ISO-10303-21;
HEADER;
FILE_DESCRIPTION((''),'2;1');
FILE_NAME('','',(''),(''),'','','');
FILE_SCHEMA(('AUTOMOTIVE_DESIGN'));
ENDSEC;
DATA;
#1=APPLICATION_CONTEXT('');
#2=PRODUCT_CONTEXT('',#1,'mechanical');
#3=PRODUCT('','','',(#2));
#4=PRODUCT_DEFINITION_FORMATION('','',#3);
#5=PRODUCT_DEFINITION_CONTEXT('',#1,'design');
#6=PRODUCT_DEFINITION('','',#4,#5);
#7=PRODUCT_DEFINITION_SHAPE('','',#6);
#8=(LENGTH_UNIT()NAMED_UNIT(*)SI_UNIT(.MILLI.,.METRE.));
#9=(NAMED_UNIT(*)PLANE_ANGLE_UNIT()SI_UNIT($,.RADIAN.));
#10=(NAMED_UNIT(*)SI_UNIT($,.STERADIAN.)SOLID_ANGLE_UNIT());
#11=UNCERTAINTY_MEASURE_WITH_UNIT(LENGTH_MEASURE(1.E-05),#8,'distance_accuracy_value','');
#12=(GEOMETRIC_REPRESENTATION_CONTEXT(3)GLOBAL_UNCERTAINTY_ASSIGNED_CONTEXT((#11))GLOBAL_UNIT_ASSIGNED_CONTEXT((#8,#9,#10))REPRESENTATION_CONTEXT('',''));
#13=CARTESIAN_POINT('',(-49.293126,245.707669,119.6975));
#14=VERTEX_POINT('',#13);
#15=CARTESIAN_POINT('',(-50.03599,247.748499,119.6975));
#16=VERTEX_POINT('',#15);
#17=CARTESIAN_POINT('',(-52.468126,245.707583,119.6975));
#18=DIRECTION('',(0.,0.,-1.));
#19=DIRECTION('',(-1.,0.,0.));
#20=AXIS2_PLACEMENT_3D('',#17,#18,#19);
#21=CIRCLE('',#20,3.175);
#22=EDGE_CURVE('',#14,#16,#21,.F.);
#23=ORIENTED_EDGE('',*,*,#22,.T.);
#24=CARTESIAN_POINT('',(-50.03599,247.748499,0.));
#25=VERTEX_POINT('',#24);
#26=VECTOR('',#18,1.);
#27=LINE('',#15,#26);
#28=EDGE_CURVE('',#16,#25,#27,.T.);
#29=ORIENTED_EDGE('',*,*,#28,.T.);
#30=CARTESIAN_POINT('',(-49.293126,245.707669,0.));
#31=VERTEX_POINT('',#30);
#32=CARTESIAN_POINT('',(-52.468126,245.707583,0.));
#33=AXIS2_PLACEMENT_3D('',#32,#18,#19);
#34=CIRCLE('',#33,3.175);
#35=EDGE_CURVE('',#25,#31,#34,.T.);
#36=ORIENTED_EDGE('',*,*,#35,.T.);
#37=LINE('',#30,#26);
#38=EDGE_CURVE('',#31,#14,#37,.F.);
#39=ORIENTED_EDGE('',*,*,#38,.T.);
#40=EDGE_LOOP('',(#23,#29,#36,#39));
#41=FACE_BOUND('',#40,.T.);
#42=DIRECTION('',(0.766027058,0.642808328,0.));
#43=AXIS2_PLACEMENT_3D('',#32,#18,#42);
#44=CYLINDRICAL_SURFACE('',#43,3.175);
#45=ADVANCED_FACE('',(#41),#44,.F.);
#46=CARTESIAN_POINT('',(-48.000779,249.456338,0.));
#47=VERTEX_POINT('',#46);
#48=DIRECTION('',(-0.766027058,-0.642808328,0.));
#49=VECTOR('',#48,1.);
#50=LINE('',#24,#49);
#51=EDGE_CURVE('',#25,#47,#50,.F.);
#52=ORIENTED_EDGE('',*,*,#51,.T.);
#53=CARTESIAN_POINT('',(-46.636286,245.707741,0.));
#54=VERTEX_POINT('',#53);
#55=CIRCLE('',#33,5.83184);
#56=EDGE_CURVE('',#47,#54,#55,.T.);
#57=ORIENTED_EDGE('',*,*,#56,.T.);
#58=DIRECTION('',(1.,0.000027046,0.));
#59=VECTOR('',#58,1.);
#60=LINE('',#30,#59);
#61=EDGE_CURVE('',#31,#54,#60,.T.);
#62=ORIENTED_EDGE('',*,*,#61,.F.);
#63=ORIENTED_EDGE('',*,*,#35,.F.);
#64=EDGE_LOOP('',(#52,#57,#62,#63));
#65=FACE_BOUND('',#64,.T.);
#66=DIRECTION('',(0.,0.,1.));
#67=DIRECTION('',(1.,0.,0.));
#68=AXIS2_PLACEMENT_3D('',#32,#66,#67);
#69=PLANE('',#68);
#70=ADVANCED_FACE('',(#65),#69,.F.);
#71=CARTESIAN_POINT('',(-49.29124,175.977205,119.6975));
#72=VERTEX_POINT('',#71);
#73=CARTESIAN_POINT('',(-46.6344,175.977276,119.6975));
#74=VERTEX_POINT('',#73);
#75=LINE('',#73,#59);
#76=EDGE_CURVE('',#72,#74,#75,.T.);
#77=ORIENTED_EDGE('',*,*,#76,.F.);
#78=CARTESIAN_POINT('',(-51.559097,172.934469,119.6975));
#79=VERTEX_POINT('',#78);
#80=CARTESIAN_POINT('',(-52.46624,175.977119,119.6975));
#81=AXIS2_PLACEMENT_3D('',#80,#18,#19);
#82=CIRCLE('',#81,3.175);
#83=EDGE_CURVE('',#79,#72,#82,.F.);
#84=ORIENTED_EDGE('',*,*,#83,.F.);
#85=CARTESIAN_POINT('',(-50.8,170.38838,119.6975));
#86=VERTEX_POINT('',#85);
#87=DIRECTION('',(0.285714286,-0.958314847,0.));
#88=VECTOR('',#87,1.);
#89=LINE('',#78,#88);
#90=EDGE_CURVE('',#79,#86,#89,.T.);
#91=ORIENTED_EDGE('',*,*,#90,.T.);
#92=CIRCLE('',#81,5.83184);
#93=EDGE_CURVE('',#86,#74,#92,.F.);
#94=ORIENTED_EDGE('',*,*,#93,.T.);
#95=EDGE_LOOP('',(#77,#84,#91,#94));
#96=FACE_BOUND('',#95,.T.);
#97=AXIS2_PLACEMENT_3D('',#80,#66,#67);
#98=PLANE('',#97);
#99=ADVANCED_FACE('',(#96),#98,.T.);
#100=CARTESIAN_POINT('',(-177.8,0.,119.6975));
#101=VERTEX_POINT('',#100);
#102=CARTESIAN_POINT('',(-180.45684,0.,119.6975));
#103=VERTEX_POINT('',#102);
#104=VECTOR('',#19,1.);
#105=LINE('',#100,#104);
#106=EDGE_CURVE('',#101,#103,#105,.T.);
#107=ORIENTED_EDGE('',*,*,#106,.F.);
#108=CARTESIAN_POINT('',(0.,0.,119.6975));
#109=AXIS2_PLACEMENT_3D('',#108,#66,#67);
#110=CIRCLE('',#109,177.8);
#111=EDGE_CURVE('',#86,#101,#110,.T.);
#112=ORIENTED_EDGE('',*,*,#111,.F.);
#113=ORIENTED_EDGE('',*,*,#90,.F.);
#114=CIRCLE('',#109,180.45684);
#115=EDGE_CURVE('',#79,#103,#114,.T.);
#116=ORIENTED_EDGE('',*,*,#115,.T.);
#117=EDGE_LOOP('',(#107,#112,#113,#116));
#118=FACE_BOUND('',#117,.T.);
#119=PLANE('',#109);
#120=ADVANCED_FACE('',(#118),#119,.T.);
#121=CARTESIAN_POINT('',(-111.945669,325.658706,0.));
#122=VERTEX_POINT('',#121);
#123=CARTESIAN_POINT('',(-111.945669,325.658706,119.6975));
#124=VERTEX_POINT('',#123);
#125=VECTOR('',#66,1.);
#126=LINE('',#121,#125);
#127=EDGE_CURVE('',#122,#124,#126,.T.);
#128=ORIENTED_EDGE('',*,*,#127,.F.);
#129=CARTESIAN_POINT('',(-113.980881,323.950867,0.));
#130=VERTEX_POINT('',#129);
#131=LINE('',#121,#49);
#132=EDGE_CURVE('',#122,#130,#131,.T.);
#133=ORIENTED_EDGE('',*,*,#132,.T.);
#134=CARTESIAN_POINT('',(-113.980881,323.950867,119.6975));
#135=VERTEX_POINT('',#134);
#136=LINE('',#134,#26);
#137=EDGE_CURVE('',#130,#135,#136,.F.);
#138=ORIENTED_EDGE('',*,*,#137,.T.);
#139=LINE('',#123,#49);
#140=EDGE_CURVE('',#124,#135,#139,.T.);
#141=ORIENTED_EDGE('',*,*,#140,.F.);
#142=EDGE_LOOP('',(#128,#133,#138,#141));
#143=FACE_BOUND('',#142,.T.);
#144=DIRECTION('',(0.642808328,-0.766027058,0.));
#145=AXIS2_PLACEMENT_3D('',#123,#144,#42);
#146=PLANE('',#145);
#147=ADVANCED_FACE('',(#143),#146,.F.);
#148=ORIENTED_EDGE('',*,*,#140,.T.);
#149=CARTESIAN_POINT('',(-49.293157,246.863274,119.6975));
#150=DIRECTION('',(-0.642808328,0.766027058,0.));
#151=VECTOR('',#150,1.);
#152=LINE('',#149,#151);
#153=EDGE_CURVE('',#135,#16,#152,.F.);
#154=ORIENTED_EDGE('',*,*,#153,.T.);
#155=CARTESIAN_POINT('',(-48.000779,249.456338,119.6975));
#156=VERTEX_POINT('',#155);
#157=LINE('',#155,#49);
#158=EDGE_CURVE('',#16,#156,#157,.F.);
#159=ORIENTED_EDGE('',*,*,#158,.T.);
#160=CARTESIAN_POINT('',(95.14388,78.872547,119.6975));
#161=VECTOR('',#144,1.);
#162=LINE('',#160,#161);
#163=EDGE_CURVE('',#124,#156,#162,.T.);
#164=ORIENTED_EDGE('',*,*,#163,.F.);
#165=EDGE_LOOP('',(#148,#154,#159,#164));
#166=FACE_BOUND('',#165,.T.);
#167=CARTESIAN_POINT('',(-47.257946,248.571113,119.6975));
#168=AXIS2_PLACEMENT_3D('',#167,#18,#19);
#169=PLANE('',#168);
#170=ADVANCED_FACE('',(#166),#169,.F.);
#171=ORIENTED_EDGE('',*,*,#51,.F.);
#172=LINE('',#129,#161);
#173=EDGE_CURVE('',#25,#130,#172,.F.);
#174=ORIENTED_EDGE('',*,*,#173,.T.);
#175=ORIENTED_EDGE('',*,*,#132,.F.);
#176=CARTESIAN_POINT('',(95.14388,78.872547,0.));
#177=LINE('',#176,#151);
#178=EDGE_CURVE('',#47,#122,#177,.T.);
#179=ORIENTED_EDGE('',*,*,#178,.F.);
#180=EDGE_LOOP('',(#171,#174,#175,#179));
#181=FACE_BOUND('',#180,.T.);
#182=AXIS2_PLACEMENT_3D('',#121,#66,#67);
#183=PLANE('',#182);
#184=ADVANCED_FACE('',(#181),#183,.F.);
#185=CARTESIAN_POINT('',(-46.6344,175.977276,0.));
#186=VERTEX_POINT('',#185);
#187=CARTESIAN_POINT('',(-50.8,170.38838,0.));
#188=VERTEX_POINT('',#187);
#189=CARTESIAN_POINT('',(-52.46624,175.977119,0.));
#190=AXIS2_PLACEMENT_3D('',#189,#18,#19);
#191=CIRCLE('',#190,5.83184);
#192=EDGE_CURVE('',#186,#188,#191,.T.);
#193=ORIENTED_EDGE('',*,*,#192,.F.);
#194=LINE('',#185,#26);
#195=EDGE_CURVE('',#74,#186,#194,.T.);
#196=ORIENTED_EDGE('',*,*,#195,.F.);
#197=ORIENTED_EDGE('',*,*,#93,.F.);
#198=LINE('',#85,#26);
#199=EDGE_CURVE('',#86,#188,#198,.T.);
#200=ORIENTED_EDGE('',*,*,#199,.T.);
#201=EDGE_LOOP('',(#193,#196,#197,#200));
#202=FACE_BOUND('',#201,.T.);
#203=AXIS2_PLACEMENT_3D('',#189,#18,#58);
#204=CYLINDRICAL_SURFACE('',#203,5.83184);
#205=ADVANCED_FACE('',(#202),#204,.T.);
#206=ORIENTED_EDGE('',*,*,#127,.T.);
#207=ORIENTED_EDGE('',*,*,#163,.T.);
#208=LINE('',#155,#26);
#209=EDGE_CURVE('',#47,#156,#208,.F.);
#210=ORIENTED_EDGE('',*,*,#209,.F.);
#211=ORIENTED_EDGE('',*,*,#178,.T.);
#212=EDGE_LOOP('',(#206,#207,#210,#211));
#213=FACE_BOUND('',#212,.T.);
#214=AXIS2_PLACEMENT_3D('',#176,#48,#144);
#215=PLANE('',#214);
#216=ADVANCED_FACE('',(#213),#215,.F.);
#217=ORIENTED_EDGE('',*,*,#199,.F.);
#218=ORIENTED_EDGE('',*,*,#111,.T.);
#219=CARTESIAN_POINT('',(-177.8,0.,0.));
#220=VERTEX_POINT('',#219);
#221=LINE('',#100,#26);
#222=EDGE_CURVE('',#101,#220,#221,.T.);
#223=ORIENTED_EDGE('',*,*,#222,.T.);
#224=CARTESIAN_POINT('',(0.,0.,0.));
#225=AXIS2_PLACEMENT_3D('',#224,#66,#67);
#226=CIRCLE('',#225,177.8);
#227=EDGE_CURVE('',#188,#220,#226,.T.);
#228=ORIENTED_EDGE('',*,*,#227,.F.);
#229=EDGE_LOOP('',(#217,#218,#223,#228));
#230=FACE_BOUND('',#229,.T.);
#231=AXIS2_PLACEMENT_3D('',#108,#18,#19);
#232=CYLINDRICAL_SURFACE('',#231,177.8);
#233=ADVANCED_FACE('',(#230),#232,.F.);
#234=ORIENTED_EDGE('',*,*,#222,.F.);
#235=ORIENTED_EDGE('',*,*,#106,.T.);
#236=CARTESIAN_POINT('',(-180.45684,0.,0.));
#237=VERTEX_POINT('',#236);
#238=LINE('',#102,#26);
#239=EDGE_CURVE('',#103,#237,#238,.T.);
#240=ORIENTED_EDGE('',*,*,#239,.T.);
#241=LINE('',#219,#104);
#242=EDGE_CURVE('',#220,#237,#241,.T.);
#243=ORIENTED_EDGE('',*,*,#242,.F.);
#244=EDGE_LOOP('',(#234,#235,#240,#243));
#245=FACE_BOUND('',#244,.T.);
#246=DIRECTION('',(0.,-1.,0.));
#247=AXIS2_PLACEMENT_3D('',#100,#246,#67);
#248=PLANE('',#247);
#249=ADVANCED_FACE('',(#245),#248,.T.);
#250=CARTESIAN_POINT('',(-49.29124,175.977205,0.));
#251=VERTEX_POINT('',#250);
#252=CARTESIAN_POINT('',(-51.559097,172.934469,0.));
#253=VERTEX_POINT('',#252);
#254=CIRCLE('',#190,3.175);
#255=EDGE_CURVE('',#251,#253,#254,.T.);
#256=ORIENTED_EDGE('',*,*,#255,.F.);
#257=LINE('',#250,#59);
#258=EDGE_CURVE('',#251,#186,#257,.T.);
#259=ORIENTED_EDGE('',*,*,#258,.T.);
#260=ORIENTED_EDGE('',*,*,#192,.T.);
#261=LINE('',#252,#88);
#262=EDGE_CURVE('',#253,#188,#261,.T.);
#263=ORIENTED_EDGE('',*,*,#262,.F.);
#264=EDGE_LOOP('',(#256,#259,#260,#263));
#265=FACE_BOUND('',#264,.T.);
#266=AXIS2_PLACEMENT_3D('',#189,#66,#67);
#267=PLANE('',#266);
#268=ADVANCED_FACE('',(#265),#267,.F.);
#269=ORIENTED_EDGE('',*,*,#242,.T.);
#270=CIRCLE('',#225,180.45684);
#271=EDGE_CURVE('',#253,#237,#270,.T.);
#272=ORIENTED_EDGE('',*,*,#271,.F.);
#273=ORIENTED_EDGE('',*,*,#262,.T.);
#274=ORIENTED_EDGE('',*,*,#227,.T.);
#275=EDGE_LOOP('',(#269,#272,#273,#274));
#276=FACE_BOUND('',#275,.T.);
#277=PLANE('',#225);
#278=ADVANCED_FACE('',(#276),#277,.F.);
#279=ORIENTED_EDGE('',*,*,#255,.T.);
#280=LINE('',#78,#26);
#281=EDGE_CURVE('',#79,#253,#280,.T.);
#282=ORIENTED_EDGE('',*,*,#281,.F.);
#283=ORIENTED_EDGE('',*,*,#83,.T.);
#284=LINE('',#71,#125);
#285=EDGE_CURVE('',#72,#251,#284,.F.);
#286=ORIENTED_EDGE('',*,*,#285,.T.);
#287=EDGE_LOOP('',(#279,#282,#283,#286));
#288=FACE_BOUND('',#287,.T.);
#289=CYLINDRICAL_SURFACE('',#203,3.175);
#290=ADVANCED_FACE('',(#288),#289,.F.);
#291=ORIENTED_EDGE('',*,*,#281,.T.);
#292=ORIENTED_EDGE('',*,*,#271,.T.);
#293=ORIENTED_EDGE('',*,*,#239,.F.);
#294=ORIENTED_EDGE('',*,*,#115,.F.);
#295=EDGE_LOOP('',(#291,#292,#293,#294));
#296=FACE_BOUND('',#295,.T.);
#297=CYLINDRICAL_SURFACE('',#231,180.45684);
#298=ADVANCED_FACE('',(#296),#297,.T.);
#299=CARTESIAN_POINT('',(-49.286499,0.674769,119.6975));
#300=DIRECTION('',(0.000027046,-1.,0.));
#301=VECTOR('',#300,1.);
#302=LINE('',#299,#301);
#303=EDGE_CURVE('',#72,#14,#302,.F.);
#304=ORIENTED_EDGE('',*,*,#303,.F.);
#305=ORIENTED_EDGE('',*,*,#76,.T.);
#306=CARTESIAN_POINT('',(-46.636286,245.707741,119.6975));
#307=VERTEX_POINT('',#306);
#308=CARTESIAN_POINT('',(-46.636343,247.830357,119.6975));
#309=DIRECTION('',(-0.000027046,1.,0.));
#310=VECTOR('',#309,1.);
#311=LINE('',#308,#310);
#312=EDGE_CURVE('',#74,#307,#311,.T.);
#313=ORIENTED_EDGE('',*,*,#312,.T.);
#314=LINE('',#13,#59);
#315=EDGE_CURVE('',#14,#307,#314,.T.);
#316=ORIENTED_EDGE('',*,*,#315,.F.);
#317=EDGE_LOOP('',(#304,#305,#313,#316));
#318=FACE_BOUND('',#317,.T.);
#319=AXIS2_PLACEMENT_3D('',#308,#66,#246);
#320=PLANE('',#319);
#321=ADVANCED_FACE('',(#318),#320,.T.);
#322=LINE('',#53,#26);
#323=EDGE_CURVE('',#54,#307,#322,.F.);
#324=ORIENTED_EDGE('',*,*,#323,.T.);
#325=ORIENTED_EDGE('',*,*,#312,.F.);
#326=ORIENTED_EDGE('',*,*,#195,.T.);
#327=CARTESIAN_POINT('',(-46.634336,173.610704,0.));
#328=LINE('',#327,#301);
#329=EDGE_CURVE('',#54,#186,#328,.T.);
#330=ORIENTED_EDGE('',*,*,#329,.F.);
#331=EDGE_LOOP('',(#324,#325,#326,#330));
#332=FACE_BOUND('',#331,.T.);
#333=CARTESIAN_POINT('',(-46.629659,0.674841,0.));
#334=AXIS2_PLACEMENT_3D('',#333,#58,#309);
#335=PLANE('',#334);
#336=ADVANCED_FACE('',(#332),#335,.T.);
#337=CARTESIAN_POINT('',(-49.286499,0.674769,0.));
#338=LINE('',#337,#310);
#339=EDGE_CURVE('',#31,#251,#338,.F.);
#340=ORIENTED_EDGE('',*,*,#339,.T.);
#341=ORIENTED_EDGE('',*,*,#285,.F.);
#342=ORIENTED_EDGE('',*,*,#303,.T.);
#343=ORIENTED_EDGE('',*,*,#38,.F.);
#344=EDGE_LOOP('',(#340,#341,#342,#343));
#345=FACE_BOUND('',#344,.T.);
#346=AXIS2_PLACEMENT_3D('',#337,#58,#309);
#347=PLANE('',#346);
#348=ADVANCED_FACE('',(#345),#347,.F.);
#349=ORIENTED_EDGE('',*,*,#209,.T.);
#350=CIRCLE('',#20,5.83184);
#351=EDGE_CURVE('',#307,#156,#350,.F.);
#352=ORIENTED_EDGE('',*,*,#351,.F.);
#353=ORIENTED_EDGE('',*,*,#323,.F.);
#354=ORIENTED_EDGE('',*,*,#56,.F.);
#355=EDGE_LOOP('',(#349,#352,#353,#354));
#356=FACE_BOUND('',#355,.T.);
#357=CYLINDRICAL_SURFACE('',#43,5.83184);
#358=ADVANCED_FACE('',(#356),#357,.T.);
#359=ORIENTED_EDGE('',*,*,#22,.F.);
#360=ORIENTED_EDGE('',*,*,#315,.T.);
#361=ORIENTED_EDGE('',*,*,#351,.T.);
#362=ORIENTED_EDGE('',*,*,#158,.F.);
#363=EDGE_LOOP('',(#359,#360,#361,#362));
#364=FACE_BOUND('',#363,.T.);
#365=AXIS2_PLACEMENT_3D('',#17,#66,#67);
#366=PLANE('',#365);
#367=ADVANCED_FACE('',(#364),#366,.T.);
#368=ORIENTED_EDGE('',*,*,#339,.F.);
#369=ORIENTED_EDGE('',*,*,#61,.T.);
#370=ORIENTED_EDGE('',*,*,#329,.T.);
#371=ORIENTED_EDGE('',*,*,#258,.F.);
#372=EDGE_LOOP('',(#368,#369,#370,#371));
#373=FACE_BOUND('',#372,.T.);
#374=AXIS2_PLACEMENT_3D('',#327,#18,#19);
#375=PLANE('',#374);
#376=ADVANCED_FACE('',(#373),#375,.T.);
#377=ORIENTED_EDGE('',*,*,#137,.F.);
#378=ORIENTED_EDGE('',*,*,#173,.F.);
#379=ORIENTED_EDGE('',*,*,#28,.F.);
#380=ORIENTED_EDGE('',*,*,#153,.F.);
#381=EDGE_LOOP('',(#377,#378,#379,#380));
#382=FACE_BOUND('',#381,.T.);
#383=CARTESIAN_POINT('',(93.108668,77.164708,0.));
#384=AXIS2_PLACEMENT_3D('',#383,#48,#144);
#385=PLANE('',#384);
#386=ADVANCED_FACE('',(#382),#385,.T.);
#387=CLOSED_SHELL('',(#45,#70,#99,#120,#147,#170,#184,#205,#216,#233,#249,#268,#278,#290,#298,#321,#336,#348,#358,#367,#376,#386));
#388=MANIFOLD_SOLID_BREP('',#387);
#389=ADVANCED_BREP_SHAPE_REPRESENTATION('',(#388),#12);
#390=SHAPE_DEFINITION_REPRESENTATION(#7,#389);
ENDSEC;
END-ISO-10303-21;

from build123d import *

# Parameters (mm, degrees)
BASE_FLANGE1_DEPTH   = 119.6975
EDGE_FLANGE1_DEPTH   = 119.6975
EDGE_FLANGE2_DEPTH   = 119.6975
EDGE_FLANGE2_2_DEPTH = 119.6975


# Read off the part's stored shape, not the designer's step: Edge-Flange2
# Sheet-metal steps are written as plain solids
with BuildPart() as part:
    # Sketch1 → Base-Flange1 (new body)
    with BuildSketch(Plane.XY):
        with BuildLine():
            ThreePointArc((-50.8, 170.388379885), (-142.557146436, 106.25582337), (-177.8, 0))
            Line((-177.8, 0), (-180.45684, 0))
            ThreePointArc((-180.45684, 0), (-144.68735751, 107.843588959), (-51.559097143, 172.934469105))
            Line((-51.559097143, 172.934469105), (-50.8, 170.388379885))
        make_face()
    extrude(amount=BASE_FLANGE1_DEPTH)

    # Edge-Flange1 section (across the edge) → Edge-Flange1 (add)
    with BuildSketch(Plane(origin=(-49.291175996, 173.610632552, 119.6975), x_dir=(-0.9999999996342678, -2.7045604981568168e-05, 0), z_dir=(0, 0, -1))):
        with BuildLine():
            Line((-2.65684, 2.366572064), (-2.65684, 74.219652496))
            Line((-2.65684, 74.219652496), (0, 74.219652496))
            Line((0, 74.219652496), (0, 2.366572064))
            ThreePointArc((0, 2.366572064), (0.62936233, 0.469112223), (2.267939433, -0.676102109))
            Line((2.267939433, -0.676102109), (1.508911151, -3.222211858))
            ThreePointArc((1.508911151, -3.222211858), (-1.500827273, -1.118682173), (-2.65684, 2.366572064))
        make_face()
    extrude(amount=EDGE_FLANGE1_DEPTH)

    # Edge-Flange2 outline → Edge-Flange2 (cut)
    with BuildSketch(Plane.XY):
        with BuildLine():
            Line((-46.636343312, 247.830356877), (-47.036345835, 247.830346059))
            ThreePointArc((-47.036345835, 247.830346059), (-46.737188142, 246.787726569), (-46.636285905, 245.707740707))
            Line((-46.636285905, 245.707740707), (-46.636343312, 247.830356877))
        make_face()
    extrude(amount=EDGE_FLANGE2_DEPTH, mode=Mode.SUBTRACT)

    # Edge-Flange2 2 outline → Edge-Flange2 2 (add)
    with BuildSketch(Plane.XY):
        with BuildLine():
            ThreePointArc((-47.036345835, 247.830346059), (-47.452236843, 248.682682095), (-48.000778663, 249.456338298))
            Line((-48.000778663, 249.456338298), (-111.945669395, 325.658705996))
            Line((-111.945669395, 325.658705996), (-113.980880724, 323.950867119))
            Line((-113.980880724, 323.950867119), (-50.035989993, 247.748499421))
            ThreePointArc((-50.035989993, 247.748499421), (-49.484631202, 246.793577627), (-49.293125904, 245.707668851))
            Line((-49.293125904, 245.707668851), (-49.293183311, 247.830285021))
            Line((-49.293183311, 247.830285021), (-47.036345835, 247.830346059))
        make_face()
    extrude(amount=EDGE_FLANGE2_2_DEPTH)


solid = part.part
